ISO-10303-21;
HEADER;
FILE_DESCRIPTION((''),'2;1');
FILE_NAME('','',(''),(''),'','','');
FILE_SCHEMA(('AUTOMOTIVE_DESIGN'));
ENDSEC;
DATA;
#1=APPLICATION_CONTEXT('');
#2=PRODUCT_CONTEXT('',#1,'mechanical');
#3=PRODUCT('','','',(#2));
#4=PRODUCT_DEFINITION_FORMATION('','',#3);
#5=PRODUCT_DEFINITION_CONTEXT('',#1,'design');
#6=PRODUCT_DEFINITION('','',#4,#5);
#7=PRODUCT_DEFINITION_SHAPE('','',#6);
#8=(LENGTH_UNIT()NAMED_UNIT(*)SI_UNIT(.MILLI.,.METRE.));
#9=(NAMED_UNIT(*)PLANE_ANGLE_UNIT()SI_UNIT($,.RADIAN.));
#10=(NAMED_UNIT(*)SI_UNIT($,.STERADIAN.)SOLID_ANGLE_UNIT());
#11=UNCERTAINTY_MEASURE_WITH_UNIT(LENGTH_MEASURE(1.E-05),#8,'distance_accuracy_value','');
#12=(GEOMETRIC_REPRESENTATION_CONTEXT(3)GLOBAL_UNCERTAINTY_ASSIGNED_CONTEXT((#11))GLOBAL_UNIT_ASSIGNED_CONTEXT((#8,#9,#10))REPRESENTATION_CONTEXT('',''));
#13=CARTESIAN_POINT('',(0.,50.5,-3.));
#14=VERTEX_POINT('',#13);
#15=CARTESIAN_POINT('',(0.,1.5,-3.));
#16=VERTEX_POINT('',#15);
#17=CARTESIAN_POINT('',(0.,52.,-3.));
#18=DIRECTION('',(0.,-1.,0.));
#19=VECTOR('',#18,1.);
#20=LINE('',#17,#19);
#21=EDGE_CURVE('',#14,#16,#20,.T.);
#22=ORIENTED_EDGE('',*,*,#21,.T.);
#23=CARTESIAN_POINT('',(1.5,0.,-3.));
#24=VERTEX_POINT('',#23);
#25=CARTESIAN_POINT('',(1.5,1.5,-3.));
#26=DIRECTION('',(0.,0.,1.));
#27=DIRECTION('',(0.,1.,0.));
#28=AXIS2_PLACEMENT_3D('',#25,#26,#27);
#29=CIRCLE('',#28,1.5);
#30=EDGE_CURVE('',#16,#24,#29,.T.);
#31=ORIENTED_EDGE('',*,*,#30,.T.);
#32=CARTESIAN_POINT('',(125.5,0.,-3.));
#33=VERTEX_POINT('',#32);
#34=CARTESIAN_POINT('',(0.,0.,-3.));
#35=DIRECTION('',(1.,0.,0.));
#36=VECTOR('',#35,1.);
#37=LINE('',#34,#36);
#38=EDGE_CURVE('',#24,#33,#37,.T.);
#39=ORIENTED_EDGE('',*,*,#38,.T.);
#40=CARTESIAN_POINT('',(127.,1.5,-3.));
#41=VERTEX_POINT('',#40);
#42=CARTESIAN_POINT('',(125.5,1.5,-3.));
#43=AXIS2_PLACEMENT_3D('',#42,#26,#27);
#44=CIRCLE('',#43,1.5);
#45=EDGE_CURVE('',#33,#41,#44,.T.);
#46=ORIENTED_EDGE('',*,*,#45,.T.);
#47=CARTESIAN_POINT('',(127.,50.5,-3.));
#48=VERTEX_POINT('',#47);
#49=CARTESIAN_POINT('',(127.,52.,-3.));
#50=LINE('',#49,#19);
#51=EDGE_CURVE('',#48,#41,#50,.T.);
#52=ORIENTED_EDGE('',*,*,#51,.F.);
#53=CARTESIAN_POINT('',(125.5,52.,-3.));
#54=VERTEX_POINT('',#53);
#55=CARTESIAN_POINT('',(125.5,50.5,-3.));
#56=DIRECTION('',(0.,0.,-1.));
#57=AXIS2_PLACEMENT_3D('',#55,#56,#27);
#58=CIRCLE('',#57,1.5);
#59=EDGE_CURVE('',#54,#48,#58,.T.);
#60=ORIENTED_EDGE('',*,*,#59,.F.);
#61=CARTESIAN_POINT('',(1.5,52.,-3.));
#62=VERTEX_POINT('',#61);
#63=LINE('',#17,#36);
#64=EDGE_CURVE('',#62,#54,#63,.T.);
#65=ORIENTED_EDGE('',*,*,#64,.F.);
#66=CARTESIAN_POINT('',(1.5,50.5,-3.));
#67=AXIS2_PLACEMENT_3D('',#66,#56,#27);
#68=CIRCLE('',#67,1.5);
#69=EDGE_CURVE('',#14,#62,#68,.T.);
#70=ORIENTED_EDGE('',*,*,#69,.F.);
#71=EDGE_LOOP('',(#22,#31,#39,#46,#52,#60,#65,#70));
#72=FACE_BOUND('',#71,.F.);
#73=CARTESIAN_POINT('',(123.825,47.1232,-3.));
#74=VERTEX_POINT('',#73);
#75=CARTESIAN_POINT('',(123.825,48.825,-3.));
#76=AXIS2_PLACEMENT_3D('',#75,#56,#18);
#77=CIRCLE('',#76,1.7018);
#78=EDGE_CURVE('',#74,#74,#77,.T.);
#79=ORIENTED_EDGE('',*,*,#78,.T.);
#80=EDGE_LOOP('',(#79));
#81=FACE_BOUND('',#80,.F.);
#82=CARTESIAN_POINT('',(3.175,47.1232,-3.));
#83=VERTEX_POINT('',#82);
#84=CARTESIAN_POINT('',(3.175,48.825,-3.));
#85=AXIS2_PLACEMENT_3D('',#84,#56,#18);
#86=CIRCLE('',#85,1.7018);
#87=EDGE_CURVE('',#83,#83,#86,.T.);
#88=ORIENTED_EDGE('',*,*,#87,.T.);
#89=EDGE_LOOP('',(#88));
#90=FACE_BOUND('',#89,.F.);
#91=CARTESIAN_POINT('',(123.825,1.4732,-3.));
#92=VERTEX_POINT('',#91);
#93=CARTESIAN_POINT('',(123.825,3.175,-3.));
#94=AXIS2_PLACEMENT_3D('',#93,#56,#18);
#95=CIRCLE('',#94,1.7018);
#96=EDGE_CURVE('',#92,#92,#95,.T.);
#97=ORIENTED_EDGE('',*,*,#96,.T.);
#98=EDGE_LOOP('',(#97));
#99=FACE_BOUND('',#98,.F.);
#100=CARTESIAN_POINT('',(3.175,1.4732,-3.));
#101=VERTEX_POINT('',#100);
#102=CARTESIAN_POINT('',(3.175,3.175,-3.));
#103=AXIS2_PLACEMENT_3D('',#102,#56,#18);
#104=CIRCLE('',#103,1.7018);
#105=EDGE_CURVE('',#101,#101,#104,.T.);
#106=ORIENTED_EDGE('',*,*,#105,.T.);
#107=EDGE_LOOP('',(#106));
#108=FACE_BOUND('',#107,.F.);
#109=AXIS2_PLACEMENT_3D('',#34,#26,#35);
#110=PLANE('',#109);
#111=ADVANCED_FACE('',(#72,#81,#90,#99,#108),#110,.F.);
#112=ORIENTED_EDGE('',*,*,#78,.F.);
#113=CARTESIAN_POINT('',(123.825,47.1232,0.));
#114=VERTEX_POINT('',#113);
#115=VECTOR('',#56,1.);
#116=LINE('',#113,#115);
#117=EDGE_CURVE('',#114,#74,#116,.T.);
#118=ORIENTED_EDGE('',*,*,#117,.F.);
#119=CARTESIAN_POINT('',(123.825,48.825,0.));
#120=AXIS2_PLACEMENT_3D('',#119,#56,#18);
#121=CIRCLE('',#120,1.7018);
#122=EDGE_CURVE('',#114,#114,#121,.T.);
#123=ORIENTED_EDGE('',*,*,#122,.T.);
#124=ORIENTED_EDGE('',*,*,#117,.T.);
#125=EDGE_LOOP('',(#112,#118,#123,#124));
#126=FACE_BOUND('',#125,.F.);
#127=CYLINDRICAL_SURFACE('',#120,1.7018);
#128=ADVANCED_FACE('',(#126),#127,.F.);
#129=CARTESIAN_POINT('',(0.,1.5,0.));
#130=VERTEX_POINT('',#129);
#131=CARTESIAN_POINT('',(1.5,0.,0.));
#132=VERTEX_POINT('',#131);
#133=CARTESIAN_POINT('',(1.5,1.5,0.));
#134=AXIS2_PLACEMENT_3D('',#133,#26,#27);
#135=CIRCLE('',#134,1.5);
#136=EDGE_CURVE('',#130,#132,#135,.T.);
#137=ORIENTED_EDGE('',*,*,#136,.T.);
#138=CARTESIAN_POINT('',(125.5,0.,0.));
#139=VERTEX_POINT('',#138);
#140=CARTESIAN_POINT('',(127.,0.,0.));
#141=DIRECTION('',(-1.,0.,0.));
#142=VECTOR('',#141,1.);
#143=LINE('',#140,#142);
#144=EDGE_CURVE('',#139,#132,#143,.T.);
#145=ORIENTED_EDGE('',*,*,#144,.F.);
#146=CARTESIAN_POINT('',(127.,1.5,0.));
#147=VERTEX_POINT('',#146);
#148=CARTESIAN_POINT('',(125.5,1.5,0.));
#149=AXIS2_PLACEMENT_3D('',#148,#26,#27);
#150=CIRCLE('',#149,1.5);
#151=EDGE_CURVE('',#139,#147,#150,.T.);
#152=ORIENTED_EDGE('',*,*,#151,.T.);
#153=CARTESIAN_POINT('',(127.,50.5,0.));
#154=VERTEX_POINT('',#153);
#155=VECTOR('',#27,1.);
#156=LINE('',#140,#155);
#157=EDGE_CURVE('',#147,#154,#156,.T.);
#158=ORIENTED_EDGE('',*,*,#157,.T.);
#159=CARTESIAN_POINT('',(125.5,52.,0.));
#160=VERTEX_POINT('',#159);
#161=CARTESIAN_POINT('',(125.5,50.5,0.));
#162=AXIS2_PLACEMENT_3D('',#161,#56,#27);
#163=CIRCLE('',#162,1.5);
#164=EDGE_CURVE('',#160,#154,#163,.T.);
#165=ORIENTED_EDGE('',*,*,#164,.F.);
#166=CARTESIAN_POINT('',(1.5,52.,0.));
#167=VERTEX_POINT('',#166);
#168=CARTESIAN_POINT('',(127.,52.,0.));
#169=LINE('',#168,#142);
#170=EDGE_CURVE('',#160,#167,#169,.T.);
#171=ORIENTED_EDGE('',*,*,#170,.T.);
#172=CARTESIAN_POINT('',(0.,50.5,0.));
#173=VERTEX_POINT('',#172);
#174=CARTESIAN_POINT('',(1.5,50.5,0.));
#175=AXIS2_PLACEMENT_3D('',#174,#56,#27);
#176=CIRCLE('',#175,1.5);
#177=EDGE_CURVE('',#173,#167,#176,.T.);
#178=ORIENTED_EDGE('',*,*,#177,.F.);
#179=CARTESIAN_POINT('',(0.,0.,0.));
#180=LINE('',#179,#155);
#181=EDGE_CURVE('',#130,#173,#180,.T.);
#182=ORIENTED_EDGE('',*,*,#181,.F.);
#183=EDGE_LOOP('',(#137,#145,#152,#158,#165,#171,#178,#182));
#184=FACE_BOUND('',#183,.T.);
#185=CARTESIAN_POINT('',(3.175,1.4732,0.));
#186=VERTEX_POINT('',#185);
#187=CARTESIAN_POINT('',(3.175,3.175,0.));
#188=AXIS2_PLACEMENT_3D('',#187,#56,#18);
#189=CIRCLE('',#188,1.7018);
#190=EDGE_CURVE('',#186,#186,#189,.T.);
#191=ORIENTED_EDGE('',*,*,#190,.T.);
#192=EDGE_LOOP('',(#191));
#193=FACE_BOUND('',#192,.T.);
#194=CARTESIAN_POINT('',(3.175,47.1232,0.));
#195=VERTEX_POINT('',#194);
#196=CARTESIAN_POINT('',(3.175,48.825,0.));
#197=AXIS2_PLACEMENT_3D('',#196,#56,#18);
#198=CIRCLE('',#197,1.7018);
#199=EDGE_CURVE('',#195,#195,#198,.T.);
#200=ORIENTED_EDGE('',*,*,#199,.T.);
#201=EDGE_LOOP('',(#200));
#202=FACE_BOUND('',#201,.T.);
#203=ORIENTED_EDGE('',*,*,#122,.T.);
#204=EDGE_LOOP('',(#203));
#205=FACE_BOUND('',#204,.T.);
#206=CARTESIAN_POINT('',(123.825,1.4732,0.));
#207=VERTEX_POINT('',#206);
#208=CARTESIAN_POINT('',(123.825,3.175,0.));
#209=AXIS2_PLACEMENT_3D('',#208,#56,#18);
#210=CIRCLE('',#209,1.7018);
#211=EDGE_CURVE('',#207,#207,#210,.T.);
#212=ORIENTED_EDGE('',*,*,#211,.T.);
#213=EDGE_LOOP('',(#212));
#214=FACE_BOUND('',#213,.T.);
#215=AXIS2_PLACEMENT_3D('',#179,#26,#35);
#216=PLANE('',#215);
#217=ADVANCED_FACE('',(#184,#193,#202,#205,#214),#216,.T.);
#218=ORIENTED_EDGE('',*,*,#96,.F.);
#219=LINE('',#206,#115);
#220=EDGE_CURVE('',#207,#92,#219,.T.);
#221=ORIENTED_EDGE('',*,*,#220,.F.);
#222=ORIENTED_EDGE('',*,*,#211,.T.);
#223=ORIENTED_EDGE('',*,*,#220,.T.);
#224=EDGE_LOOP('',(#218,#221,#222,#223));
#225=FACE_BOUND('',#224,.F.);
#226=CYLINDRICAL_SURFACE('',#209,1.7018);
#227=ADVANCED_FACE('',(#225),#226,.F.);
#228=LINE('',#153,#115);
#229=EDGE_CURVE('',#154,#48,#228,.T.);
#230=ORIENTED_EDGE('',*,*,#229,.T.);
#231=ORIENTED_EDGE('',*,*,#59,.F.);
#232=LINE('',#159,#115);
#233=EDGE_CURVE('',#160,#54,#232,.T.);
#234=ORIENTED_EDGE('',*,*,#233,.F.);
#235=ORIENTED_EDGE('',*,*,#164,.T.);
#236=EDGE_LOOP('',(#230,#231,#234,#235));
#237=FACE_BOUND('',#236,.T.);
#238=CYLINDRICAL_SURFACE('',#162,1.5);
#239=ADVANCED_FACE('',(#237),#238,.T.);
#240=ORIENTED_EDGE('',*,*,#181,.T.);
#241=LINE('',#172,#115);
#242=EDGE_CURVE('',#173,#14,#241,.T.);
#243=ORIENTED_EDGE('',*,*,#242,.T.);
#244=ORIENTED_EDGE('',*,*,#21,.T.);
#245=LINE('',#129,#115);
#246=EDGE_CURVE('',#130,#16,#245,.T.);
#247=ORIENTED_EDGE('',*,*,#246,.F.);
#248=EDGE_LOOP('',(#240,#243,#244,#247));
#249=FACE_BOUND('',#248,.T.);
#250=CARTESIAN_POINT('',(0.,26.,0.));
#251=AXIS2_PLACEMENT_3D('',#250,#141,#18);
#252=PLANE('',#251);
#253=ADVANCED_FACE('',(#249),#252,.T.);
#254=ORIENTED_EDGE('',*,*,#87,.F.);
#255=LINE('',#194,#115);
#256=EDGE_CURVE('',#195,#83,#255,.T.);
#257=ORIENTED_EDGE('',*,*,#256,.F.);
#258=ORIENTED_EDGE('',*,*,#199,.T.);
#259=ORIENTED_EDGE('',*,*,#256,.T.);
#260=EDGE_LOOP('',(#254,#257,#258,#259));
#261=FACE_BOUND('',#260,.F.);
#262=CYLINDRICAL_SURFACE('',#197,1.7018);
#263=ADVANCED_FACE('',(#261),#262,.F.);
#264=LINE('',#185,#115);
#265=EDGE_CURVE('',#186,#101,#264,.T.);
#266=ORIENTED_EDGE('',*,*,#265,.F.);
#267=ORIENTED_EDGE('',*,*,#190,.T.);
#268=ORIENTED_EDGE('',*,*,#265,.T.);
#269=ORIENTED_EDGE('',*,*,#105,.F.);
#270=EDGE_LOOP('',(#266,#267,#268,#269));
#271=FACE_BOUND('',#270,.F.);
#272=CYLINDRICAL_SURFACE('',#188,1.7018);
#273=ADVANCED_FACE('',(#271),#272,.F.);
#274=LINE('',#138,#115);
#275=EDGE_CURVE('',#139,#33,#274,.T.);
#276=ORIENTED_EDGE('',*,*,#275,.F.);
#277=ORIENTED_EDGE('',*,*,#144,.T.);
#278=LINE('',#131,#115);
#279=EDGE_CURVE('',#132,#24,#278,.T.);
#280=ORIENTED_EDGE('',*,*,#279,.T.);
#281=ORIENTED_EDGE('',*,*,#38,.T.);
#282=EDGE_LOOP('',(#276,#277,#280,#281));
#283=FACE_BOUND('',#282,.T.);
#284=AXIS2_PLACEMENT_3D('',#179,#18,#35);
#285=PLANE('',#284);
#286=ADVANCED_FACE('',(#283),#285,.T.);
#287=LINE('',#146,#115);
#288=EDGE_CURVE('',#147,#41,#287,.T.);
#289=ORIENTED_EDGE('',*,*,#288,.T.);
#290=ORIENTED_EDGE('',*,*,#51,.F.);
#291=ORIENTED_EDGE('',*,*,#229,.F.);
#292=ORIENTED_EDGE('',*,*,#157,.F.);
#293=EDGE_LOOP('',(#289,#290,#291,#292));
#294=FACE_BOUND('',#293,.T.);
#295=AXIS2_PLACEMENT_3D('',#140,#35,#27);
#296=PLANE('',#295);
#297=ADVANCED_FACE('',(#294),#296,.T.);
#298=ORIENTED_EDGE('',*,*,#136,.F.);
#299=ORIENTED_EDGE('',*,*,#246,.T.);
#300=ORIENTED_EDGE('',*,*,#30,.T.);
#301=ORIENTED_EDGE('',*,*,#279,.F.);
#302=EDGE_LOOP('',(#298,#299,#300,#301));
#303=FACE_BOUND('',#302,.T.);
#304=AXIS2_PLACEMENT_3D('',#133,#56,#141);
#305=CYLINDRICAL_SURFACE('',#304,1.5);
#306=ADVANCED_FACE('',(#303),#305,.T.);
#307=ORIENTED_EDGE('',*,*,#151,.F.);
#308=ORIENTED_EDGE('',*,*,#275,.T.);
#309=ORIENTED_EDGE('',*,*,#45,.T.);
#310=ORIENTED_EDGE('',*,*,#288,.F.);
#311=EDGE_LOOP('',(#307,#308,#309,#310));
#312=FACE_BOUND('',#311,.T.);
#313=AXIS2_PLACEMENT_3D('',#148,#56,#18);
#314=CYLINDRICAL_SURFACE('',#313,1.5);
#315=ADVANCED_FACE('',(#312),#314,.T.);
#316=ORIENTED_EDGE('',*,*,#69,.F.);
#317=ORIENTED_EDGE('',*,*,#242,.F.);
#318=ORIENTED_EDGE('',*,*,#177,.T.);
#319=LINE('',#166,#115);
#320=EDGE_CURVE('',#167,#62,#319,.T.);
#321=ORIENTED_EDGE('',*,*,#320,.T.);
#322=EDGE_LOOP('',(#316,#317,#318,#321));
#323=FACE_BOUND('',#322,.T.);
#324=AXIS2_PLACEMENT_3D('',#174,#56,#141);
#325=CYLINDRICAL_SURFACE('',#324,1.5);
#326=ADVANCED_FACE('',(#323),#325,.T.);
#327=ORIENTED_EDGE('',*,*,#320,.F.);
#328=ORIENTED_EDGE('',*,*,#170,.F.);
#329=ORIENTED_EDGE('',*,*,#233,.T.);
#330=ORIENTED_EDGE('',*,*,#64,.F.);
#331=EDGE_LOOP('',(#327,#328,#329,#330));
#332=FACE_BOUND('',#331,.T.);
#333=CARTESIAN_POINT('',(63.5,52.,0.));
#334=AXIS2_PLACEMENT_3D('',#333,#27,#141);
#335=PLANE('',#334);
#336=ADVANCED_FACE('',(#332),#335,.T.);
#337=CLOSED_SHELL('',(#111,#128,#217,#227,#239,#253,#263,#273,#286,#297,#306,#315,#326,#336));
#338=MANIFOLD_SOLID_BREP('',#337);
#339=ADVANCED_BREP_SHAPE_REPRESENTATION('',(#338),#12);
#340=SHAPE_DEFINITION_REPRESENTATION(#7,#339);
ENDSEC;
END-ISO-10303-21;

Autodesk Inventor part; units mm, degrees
ref_plane "YZ Plane" through (0, 0, 0) normal (1, 0, 0) x (0, 1, 0)
ref_plane "XZ Plane" through (0, 0, 0) normal (0, 1, 0) x (-1, 0, 0)
ref_plane "XY Plane" through (0, 0, 0) normal (0, 0, 1) x (1, 0, 0)
sketch "Main Profile" plane through (0, 0, 0) normal (0, 0, 1) x (1, 0, 0)
  line L0 (0, 0) -> (127, 0)
  line L1 (127, 0) -> (127, 52)
  line L2 (127, 52) -> (0, 52)
  line L3 (0, 52) -> (0, 0)
  line L4 (0, 26) -> (127, 26)
  line L5 (63.5, 52) -> (63.5, 0)
  point P0 (3.175, 48.825)
  point P1 (123.825, 48.825)
  point P2 (3.175, 3.175)
  point P3 (123.825, 3.175)
  dimension "d0" = 127
  dimension "d1" = 52
  dimension "d2" = 3.175
  dimension "d3" = 3.175
extrude "Panel" add sketch "Main Profile" against normal blind 3
hole "Mounting Hole" at (3.175, 48.825, 0) direction (0, 0, -1) diameter 3.4036 end through all clearance for "Socket Head Cap Screw" size "M3" standard "Ansi Metric M Profile"
pattern_sketch "Mounting Holes" of "Mounting Hole" from (3.175, 48.825, 0) copies at (123.825, 48.825, 0) at (3.175, 3.175, 0) at (123.825, 3.175, 0)
fillet "Corner Fillets" radius 1.5 4 edges at (0, 52, -1.5) (0, 0, -1.5) (127, 0, -1.5) (127, 52, -1.5)
equation "\"d3\" = d2"
properties part number "Junction Box Modbay Cover" material "ABS Plastic"
